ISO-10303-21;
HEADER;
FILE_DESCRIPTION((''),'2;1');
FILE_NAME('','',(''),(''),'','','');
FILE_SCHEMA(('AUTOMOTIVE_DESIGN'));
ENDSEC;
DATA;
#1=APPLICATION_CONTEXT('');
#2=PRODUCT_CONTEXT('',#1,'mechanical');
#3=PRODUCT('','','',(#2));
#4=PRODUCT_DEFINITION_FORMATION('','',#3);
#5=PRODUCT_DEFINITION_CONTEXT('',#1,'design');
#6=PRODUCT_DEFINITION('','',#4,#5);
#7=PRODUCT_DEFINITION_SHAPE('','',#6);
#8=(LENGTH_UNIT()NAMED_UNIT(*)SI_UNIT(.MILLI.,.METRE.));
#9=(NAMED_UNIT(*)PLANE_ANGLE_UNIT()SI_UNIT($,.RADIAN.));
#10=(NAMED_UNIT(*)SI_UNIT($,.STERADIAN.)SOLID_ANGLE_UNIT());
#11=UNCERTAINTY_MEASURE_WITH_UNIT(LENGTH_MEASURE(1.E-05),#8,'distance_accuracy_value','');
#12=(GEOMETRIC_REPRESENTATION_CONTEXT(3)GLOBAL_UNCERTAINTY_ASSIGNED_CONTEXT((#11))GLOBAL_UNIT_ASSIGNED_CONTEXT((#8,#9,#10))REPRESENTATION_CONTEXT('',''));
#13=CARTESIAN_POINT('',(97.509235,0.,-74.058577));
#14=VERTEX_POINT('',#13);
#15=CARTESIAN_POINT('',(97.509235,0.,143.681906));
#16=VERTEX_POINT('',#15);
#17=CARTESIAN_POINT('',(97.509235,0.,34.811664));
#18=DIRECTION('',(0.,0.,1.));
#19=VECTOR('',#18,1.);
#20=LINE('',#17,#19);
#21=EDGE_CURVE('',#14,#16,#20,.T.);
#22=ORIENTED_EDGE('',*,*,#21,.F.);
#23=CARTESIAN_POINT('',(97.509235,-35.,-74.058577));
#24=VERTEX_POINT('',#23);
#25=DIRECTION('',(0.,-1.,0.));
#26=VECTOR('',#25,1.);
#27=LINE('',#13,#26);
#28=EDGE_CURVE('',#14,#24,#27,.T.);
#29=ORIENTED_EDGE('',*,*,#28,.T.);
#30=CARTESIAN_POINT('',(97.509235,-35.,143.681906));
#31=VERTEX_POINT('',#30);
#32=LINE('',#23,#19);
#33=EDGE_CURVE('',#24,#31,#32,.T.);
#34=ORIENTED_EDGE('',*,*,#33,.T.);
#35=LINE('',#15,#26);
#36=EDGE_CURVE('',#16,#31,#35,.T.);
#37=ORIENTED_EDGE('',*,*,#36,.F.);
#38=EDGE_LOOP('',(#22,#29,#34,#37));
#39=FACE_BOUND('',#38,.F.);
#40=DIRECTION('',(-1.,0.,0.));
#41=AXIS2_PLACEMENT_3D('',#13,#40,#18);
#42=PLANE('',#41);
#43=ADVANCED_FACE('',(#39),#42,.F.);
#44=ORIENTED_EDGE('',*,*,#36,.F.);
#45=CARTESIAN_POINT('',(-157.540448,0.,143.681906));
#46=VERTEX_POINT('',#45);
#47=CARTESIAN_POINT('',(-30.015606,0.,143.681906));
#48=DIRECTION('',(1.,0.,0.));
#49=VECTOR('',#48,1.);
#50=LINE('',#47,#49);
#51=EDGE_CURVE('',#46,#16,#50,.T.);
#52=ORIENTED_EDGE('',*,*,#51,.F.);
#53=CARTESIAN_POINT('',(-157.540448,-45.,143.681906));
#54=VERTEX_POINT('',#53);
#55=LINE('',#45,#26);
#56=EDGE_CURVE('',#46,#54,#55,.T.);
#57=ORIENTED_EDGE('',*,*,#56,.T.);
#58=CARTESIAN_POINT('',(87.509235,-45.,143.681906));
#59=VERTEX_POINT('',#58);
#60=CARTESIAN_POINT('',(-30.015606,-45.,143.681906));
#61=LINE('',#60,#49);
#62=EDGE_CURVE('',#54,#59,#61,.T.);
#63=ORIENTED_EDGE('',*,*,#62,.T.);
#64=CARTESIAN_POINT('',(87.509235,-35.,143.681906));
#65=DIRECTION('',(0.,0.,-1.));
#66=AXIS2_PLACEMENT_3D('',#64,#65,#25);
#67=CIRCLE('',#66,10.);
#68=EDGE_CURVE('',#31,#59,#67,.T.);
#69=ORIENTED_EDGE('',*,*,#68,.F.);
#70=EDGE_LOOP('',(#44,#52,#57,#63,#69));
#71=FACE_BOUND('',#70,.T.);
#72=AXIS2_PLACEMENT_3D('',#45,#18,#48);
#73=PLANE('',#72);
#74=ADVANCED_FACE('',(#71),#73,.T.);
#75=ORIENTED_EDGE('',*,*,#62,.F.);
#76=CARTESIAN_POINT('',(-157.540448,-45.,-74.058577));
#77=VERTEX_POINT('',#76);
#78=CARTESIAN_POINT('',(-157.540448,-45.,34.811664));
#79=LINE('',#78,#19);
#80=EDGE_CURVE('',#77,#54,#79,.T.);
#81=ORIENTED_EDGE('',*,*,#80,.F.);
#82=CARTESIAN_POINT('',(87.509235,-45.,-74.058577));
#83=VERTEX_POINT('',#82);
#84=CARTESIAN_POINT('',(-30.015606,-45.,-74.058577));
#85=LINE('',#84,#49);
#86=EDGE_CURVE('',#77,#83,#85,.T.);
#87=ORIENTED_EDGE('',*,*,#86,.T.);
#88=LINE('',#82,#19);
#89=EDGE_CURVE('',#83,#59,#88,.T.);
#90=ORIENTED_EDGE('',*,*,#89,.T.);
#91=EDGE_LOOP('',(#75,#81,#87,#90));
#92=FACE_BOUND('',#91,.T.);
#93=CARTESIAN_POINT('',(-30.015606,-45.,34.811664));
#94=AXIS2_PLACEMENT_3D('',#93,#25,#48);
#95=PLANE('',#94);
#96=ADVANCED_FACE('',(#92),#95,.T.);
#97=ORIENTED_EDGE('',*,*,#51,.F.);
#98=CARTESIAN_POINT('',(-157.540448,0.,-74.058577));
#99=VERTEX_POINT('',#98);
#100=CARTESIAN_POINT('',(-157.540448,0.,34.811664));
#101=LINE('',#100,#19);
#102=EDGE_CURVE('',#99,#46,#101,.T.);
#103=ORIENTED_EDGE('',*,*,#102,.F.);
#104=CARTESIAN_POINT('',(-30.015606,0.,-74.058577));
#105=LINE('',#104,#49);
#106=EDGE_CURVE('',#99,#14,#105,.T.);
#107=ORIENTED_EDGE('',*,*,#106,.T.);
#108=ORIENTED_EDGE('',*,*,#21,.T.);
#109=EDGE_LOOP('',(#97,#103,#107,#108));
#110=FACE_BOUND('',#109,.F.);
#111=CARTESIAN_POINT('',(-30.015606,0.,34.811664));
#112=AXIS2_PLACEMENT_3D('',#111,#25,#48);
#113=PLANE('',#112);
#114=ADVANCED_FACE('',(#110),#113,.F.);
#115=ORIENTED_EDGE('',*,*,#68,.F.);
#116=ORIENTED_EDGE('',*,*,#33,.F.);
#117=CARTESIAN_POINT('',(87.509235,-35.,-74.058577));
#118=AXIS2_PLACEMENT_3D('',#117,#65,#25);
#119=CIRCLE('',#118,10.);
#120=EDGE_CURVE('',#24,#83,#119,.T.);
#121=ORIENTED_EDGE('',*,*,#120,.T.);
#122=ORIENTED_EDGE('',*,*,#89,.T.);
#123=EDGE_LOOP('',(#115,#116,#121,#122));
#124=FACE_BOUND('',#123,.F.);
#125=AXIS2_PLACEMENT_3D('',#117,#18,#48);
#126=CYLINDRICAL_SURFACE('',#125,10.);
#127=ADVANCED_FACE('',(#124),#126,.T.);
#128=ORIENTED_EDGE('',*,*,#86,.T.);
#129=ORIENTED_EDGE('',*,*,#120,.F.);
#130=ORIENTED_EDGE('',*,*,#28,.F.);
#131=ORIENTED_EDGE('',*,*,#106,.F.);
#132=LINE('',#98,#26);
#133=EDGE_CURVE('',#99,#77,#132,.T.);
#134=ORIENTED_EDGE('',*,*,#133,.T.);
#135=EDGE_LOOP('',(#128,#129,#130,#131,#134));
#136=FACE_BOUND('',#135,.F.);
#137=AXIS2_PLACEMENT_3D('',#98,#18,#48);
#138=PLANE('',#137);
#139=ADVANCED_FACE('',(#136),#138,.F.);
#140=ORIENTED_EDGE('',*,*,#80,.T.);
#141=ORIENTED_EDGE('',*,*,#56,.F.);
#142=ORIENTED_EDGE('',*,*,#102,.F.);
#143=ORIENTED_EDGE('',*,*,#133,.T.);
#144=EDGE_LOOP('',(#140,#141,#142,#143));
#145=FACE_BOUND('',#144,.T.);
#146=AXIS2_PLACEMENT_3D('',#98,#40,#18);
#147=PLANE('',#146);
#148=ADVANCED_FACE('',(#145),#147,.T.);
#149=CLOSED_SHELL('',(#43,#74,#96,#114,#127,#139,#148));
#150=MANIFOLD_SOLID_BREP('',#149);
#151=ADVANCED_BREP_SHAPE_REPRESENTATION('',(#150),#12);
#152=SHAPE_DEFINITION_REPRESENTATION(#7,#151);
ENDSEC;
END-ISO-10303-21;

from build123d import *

# Parameters (mm, degrees)
F0_W     = 255.0496831536
F0_H     = 217.740483582
F1_DEPTH = 45
F2_R     = 10


# Not quite as in the source:
# - the program builds the solid bodies; features that only make, move or delete a surface that nothing else refers to are left out


with BuildPart() as f1:
    # F0 (on Front) → F1 (new body)
    with BuildSketch(Plane.XZ):
        with Locations((-30.0156064332, 34.8116643727)):
            Rectangle(F0_W, F0_H)
    extrude(amount=F1_DEPTH)

    # F2
    f2_edges = [f1.edges().sort_by_distance(p)[0] for p in [
        (97.509235, -45, 34.811664),
    ]]
    fillet(f2_edges, radius=F2_R)


solid = f1.part
